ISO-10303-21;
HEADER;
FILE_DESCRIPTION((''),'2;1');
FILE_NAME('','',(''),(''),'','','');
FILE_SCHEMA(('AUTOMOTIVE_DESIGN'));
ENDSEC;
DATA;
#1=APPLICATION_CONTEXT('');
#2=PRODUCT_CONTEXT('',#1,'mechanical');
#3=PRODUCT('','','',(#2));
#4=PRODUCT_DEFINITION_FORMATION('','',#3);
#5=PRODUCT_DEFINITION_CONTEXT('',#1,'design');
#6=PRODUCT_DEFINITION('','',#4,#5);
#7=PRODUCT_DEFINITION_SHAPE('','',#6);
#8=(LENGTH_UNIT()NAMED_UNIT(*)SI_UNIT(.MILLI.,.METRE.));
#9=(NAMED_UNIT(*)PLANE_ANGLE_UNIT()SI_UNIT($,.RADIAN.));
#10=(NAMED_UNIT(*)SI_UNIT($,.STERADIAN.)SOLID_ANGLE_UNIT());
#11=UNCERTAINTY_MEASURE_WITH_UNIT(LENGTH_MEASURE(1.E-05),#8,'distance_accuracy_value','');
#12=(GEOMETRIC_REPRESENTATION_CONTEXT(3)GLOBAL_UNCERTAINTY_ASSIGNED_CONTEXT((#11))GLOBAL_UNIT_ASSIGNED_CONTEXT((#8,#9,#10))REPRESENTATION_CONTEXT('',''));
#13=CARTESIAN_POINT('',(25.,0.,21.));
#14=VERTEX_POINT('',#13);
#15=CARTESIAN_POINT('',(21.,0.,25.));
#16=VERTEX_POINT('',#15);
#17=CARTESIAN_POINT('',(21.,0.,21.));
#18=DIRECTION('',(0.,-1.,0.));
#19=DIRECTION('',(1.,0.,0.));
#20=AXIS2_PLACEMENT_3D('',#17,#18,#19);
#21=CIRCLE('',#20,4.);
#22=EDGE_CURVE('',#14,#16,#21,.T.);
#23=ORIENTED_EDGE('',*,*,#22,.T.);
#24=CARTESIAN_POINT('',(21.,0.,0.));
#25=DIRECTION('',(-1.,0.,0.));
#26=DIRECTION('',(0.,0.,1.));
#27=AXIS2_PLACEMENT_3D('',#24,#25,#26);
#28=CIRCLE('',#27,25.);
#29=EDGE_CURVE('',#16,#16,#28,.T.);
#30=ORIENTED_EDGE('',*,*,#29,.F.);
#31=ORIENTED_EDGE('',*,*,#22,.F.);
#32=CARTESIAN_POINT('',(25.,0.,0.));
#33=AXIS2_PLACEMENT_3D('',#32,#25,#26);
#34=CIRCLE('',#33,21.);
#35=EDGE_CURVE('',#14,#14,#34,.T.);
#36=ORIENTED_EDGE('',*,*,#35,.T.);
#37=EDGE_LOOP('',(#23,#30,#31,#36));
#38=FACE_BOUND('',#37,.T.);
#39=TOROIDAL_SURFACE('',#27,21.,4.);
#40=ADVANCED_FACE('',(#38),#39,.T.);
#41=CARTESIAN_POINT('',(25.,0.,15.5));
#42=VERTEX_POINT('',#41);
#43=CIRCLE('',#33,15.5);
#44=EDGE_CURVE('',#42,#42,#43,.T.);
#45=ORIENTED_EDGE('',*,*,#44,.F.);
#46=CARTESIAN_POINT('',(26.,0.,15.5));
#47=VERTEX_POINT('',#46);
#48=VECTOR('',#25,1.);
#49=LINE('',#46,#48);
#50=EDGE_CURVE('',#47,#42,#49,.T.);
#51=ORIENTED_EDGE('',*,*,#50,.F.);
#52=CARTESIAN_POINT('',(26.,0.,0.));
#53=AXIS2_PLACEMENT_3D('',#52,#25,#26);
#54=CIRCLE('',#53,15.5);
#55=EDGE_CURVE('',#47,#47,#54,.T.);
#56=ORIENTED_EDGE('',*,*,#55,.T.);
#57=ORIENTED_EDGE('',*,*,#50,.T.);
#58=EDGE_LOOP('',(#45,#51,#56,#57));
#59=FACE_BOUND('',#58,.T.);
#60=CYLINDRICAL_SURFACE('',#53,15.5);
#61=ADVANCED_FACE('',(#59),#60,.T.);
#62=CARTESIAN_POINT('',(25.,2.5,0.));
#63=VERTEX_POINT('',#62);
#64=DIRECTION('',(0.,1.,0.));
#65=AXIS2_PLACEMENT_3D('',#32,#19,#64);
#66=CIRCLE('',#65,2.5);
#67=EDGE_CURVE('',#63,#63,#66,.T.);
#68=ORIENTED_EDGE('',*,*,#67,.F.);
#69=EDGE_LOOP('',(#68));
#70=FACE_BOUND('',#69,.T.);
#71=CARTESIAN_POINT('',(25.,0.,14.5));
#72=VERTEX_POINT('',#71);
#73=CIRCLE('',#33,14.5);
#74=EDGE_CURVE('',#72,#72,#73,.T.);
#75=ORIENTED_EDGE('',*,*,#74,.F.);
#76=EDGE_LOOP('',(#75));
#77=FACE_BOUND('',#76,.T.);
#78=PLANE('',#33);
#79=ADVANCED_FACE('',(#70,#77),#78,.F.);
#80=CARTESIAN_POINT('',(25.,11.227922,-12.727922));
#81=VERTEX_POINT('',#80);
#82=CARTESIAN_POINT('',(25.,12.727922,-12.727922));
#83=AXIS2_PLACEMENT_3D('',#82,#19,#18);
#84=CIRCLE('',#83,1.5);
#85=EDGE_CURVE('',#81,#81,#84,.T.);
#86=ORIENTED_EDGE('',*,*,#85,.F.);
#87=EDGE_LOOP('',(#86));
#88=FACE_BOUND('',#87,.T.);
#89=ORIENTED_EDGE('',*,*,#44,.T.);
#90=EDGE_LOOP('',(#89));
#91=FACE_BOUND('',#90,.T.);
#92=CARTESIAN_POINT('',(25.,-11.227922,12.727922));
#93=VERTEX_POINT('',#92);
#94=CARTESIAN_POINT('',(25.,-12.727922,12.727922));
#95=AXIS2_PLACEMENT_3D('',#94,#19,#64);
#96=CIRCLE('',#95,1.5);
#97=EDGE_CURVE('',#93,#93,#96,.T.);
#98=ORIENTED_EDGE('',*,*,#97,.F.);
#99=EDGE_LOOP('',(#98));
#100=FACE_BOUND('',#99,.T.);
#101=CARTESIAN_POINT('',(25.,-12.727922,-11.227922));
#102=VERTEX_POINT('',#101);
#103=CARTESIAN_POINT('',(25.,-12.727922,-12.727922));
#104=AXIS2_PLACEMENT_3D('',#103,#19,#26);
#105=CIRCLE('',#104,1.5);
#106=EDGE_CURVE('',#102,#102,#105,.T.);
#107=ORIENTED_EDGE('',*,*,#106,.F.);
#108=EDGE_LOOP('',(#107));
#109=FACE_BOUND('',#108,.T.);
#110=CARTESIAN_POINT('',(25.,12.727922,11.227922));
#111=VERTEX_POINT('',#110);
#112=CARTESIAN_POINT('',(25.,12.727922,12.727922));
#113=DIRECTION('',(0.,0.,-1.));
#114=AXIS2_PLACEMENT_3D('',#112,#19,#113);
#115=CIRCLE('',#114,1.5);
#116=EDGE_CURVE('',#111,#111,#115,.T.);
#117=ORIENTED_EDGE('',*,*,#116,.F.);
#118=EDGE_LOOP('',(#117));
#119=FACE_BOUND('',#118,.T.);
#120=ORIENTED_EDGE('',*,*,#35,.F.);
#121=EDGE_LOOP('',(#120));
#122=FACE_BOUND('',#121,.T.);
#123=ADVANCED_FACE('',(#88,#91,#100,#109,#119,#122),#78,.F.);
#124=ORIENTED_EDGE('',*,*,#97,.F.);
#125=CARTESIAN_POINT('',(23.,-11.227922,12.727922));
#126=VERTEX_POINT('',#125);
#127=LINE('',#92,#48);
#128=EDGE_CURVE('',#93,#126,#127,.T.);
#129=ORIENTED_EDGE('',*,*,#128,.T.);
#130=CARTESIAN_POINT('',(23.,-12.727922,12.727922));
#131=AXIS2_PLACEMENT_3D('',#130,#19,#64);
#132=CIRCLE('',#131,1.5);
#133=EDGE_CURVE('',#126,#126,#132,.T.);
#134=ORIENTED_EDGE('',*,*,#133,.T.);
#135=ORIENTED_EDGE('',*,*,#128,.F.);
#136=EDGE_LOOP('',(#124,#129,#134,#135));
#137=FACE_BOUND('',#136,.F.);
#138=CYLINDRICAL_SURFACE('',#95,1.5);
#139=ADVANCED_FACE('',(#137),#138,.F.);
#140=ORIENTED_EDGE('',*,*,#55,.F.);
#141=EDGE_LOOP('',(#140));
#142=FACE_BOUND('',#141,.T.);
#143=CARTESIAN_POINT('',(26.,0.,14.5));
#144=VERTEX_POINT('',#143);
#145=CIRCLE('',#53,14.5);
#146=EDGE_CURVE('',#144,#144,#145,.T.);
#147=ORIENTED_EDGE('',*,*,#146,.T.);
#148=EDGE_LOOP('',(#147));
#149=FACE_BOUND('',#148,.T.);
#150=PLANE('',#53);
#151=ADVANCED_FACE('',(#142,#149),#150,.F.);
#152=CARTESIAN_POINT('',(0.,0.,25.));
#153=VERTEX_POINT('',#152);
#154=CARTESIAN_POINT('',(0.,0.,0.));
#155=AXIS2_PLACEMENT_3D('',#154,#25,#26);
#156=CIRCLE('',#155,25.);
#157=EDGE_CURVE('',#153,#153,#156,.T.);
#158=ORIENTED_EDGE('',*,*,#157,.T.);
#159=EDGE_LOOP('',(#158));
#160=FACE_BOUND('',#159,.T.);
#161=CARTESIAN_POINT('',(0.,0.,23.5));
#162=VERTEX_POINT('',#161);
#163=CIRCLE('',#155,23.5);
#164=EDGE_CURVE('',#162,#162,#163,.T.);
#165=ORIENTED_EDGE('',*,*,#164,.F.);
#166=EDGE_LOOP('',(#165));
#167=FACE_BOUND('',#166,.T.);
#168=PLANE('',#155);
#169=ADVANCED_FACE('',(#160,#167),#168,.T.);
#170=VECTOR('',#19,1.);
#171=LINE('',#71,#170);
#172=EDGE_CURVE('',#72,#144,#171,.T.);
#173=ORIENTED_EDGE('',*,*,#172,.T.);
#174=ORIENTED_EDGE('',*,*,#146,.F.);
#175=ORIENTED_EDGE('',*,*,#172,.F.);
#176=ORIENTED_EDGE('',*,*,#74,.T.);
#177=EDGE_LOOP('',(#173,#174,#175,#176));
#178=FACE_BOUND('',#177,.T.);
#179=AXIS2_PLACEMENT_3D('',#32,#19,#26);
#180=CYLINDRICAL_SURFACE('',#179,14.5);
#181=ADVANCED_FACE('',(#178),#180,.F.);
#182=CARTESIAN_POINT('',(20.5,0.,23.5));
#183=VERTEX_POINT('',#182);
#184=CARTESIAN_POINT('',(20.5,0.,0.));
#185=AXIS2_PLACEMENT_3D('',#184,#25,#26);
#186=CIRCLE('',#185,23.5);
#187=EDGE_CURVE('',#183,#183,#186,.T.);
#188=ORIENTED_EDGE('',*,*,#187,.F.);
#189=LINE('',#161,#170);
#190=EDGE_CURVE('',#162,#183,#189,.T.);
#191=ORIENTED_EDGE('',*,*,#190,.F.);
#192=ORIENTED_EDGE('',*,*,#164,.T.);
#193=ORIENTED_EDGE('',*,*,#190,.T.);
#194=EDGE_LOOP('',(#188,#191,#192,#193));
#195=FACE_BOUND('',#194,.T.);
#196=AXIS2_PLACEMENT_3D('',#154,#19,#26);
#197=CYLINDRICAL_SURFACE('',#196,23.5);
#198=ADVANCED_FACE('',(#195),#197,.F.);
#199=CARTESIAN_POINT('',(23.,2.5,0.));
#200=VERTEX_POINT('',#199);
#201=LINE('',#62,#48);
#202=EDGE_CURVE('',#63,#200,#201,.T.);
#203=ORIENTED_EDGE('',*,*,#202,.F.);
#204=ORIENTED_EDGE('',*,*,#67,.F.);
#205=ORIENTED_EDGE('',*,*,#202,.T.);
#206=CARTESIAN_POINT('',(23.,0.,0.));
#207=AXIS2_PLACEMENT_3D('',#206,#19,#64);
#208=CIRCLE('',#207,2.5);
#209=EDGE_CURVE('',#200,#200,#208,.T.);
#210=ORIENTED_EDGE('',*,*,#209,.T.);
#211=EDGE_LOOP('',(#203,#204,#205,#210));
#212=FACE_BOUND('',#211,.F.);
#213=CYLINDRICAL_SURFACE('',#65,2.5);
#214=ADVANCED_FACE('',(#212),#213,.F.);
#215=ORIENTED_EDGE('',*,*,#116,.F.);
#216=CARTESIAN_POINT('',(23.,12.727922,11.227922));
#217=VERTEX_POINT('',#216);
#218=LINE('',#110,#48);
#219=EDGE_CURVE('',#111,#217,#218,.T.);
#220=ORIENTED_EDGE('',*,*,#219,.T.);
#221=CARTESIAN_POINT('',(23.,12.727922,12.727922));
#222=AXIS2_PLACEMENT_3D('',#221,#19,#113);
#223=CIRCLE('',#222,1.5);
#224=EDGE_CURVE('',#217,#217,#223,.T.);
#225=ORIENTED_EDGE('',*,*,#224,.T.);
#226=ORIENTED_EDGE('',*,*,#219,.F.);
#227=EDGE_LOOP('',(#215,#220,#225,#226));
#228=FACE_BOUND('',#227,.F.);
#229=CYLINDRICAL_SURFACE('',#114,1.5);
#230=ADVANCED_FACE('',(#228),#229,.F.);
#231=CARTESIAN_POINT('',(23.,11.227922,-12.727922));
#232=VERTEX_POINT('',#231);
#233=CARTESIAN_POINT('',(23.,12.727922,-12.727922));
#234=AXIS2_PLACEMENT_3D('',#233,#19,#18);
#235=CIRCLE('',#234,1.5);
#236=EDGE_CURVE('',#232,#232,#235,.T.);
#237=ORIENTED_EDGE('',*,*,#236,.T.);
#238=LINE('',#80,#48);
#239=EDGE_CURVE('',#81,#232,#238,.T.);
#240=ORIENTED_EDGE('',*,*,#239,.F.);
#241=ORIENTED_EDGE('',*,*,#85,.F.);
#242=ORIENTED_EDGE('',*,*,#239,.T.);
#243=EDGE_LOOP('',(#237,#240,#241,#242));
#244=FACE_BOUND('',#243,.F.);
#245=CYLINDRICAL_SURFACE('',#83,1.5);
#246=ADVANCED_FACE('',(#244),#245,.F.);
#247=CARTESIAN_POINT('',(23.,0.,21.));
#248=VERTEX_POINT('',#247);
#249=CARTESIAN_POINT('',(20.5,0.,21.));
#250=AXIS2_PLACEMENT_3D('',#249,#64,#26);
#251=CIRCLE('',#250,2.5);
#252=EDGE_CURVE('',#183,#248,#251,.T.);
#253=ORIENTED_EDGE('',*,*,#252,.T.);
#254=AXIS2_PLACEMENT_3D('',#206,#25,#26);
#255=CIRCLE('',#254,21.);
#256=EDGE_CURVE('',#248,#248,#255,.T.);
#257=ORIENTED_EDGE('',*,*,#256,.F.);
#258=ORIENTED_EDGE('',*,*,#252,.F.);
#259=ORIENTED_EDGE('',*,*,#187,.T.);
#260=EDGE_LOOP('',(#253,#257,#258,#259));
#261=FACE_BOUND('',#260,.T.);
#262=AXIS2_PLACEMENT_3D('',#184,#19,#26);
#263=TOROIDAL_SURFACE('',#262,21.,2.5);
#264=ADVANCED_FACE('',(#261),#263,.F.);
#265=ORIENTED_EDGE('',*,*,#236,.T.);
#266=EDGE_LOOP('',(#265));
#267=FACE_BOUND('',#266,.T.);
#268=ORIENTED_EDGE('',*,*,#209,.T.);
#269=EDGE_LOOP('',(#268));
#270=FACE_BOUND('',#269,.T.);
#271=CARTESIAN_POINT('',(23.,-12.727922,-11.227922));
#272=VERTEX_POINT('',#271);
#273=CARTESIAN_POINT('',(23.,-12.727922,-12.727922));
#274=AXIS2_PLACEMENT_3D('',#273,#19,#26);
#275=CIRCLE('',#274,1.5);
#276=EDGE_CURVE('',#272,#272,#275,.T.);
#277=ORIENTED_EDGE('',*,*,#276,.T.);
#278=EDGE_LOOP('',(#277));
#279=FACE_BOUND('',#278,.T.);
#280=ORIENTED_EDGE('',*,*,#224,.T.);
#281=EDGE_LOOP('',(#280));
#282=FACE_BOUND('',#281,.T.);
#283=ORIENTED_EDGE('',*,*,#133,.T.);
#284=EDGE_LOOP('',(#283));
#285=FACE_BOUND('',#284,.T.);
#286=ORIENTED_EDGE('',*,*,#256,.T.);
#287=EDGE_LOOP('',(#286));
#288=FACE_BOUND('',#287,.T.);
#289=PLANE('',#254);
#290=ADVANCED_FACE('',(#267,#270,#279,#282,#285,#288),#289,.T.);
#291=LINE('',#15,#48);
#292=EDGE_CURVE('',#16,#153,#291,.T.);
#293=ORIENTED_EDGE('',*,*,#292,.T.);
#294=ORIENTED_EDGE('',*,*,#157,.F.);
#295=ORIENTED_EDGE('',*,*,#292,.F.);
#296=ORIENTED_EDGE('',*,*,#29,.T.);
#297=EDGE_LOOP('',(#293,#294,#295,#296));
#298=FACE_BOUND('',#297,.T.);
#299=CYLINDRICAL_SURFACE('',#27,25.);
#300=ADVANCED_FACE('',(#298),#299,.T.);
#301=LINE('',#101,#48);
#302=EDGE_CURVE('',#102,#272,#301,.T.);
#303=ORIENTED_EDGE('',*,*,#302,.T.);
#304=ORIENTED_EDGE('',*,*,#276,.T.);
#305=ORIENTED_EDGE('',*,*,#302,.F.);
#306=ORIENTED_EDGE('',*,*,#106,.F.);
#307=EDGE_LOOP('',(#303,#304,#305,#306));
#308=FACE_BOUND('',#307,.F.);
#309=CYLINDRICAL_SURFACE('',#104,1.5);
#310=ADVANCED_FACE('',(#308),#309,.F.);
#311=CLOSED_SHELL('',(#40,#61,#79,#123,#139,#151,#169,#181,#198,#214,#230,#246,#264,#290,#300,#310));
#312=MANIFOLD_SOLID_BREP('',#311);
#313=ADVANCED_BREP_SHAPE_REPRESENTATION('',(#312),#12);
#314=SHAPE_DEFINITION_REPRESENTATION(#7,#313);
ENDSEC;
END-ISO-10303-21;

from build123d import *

# Parameters (mm, degrees)
F2_R            = 2.5
F3_DEPTH        = 25.001
F2_R_2          = 1.5
F4_DEPTH        = 25.001
F4_COPIES_COUNT = 4


# Not quite as in the source:
# - a pattern or mirror of a feature is missing from the dataset's text; its kind, count and spacing are read off the source's solid


with BuildPart() as f1:
    # F0 (on Front) → F1 (revolve)
    with BuildSketch(Plane.XZ):
        with BuildLine():
            Line((0, 25), (0, 23.5))
            Line((0, 23.5), (20.5, 23.5))
            ThreePointArc((20.5, 23.5), (22.267766953, 22.767766953), (23, 21))
            Line((23, 21), (23, 0))
            Line((23, 0), (25, 0))
            Line((25, 0), (25, 14.5))
            Line((25, 14.5), (26, 14.5))
            Line((26, 14.5), (26, 15.5))
            Line((26, 15.5), (25, 15.5))
            Line((25, 15.5), (25, 21))
            ThreePointArc((25, 21), (23.8284271247, 23.8284271247), (21, 25))
            Line((21, 25), (0, 25))
        make_face()
    revolve(axis=Axis((24, 0, 0), (-1, 0, 0)))

    # F2 (on face) → F3 (cut, through all)
    with BuildSketch(Plane.YZ.offset(25)):
        Circle(F2_R)
    extrude(amount=-F3_DEPTH, mode=Mode.SUBTRACT)

    # F2 (on face) → F4 (cut, through all)
    with BuildSketch(Plane.YZ.offset(25)):
        with Locations((-12.7279220614, 12.7279220614)):
            Circle(F2_R_2)
    f4 = extrude(amount=-F4_DEPTH, mode=Mode.SUBTRACT)

    # F4_copies: F4 ×4 about axis
    f4_copies_axis = Axis((0, 0, 0), (1, 0, 0))
    for i in range(1, F4_COPIES_COUNT):
        add(f4.rotate(f4_copies_axis, i * 360 / F4_COPIES_COUNT), mode=Mode.SUBTRACT)


solid = f1.part
